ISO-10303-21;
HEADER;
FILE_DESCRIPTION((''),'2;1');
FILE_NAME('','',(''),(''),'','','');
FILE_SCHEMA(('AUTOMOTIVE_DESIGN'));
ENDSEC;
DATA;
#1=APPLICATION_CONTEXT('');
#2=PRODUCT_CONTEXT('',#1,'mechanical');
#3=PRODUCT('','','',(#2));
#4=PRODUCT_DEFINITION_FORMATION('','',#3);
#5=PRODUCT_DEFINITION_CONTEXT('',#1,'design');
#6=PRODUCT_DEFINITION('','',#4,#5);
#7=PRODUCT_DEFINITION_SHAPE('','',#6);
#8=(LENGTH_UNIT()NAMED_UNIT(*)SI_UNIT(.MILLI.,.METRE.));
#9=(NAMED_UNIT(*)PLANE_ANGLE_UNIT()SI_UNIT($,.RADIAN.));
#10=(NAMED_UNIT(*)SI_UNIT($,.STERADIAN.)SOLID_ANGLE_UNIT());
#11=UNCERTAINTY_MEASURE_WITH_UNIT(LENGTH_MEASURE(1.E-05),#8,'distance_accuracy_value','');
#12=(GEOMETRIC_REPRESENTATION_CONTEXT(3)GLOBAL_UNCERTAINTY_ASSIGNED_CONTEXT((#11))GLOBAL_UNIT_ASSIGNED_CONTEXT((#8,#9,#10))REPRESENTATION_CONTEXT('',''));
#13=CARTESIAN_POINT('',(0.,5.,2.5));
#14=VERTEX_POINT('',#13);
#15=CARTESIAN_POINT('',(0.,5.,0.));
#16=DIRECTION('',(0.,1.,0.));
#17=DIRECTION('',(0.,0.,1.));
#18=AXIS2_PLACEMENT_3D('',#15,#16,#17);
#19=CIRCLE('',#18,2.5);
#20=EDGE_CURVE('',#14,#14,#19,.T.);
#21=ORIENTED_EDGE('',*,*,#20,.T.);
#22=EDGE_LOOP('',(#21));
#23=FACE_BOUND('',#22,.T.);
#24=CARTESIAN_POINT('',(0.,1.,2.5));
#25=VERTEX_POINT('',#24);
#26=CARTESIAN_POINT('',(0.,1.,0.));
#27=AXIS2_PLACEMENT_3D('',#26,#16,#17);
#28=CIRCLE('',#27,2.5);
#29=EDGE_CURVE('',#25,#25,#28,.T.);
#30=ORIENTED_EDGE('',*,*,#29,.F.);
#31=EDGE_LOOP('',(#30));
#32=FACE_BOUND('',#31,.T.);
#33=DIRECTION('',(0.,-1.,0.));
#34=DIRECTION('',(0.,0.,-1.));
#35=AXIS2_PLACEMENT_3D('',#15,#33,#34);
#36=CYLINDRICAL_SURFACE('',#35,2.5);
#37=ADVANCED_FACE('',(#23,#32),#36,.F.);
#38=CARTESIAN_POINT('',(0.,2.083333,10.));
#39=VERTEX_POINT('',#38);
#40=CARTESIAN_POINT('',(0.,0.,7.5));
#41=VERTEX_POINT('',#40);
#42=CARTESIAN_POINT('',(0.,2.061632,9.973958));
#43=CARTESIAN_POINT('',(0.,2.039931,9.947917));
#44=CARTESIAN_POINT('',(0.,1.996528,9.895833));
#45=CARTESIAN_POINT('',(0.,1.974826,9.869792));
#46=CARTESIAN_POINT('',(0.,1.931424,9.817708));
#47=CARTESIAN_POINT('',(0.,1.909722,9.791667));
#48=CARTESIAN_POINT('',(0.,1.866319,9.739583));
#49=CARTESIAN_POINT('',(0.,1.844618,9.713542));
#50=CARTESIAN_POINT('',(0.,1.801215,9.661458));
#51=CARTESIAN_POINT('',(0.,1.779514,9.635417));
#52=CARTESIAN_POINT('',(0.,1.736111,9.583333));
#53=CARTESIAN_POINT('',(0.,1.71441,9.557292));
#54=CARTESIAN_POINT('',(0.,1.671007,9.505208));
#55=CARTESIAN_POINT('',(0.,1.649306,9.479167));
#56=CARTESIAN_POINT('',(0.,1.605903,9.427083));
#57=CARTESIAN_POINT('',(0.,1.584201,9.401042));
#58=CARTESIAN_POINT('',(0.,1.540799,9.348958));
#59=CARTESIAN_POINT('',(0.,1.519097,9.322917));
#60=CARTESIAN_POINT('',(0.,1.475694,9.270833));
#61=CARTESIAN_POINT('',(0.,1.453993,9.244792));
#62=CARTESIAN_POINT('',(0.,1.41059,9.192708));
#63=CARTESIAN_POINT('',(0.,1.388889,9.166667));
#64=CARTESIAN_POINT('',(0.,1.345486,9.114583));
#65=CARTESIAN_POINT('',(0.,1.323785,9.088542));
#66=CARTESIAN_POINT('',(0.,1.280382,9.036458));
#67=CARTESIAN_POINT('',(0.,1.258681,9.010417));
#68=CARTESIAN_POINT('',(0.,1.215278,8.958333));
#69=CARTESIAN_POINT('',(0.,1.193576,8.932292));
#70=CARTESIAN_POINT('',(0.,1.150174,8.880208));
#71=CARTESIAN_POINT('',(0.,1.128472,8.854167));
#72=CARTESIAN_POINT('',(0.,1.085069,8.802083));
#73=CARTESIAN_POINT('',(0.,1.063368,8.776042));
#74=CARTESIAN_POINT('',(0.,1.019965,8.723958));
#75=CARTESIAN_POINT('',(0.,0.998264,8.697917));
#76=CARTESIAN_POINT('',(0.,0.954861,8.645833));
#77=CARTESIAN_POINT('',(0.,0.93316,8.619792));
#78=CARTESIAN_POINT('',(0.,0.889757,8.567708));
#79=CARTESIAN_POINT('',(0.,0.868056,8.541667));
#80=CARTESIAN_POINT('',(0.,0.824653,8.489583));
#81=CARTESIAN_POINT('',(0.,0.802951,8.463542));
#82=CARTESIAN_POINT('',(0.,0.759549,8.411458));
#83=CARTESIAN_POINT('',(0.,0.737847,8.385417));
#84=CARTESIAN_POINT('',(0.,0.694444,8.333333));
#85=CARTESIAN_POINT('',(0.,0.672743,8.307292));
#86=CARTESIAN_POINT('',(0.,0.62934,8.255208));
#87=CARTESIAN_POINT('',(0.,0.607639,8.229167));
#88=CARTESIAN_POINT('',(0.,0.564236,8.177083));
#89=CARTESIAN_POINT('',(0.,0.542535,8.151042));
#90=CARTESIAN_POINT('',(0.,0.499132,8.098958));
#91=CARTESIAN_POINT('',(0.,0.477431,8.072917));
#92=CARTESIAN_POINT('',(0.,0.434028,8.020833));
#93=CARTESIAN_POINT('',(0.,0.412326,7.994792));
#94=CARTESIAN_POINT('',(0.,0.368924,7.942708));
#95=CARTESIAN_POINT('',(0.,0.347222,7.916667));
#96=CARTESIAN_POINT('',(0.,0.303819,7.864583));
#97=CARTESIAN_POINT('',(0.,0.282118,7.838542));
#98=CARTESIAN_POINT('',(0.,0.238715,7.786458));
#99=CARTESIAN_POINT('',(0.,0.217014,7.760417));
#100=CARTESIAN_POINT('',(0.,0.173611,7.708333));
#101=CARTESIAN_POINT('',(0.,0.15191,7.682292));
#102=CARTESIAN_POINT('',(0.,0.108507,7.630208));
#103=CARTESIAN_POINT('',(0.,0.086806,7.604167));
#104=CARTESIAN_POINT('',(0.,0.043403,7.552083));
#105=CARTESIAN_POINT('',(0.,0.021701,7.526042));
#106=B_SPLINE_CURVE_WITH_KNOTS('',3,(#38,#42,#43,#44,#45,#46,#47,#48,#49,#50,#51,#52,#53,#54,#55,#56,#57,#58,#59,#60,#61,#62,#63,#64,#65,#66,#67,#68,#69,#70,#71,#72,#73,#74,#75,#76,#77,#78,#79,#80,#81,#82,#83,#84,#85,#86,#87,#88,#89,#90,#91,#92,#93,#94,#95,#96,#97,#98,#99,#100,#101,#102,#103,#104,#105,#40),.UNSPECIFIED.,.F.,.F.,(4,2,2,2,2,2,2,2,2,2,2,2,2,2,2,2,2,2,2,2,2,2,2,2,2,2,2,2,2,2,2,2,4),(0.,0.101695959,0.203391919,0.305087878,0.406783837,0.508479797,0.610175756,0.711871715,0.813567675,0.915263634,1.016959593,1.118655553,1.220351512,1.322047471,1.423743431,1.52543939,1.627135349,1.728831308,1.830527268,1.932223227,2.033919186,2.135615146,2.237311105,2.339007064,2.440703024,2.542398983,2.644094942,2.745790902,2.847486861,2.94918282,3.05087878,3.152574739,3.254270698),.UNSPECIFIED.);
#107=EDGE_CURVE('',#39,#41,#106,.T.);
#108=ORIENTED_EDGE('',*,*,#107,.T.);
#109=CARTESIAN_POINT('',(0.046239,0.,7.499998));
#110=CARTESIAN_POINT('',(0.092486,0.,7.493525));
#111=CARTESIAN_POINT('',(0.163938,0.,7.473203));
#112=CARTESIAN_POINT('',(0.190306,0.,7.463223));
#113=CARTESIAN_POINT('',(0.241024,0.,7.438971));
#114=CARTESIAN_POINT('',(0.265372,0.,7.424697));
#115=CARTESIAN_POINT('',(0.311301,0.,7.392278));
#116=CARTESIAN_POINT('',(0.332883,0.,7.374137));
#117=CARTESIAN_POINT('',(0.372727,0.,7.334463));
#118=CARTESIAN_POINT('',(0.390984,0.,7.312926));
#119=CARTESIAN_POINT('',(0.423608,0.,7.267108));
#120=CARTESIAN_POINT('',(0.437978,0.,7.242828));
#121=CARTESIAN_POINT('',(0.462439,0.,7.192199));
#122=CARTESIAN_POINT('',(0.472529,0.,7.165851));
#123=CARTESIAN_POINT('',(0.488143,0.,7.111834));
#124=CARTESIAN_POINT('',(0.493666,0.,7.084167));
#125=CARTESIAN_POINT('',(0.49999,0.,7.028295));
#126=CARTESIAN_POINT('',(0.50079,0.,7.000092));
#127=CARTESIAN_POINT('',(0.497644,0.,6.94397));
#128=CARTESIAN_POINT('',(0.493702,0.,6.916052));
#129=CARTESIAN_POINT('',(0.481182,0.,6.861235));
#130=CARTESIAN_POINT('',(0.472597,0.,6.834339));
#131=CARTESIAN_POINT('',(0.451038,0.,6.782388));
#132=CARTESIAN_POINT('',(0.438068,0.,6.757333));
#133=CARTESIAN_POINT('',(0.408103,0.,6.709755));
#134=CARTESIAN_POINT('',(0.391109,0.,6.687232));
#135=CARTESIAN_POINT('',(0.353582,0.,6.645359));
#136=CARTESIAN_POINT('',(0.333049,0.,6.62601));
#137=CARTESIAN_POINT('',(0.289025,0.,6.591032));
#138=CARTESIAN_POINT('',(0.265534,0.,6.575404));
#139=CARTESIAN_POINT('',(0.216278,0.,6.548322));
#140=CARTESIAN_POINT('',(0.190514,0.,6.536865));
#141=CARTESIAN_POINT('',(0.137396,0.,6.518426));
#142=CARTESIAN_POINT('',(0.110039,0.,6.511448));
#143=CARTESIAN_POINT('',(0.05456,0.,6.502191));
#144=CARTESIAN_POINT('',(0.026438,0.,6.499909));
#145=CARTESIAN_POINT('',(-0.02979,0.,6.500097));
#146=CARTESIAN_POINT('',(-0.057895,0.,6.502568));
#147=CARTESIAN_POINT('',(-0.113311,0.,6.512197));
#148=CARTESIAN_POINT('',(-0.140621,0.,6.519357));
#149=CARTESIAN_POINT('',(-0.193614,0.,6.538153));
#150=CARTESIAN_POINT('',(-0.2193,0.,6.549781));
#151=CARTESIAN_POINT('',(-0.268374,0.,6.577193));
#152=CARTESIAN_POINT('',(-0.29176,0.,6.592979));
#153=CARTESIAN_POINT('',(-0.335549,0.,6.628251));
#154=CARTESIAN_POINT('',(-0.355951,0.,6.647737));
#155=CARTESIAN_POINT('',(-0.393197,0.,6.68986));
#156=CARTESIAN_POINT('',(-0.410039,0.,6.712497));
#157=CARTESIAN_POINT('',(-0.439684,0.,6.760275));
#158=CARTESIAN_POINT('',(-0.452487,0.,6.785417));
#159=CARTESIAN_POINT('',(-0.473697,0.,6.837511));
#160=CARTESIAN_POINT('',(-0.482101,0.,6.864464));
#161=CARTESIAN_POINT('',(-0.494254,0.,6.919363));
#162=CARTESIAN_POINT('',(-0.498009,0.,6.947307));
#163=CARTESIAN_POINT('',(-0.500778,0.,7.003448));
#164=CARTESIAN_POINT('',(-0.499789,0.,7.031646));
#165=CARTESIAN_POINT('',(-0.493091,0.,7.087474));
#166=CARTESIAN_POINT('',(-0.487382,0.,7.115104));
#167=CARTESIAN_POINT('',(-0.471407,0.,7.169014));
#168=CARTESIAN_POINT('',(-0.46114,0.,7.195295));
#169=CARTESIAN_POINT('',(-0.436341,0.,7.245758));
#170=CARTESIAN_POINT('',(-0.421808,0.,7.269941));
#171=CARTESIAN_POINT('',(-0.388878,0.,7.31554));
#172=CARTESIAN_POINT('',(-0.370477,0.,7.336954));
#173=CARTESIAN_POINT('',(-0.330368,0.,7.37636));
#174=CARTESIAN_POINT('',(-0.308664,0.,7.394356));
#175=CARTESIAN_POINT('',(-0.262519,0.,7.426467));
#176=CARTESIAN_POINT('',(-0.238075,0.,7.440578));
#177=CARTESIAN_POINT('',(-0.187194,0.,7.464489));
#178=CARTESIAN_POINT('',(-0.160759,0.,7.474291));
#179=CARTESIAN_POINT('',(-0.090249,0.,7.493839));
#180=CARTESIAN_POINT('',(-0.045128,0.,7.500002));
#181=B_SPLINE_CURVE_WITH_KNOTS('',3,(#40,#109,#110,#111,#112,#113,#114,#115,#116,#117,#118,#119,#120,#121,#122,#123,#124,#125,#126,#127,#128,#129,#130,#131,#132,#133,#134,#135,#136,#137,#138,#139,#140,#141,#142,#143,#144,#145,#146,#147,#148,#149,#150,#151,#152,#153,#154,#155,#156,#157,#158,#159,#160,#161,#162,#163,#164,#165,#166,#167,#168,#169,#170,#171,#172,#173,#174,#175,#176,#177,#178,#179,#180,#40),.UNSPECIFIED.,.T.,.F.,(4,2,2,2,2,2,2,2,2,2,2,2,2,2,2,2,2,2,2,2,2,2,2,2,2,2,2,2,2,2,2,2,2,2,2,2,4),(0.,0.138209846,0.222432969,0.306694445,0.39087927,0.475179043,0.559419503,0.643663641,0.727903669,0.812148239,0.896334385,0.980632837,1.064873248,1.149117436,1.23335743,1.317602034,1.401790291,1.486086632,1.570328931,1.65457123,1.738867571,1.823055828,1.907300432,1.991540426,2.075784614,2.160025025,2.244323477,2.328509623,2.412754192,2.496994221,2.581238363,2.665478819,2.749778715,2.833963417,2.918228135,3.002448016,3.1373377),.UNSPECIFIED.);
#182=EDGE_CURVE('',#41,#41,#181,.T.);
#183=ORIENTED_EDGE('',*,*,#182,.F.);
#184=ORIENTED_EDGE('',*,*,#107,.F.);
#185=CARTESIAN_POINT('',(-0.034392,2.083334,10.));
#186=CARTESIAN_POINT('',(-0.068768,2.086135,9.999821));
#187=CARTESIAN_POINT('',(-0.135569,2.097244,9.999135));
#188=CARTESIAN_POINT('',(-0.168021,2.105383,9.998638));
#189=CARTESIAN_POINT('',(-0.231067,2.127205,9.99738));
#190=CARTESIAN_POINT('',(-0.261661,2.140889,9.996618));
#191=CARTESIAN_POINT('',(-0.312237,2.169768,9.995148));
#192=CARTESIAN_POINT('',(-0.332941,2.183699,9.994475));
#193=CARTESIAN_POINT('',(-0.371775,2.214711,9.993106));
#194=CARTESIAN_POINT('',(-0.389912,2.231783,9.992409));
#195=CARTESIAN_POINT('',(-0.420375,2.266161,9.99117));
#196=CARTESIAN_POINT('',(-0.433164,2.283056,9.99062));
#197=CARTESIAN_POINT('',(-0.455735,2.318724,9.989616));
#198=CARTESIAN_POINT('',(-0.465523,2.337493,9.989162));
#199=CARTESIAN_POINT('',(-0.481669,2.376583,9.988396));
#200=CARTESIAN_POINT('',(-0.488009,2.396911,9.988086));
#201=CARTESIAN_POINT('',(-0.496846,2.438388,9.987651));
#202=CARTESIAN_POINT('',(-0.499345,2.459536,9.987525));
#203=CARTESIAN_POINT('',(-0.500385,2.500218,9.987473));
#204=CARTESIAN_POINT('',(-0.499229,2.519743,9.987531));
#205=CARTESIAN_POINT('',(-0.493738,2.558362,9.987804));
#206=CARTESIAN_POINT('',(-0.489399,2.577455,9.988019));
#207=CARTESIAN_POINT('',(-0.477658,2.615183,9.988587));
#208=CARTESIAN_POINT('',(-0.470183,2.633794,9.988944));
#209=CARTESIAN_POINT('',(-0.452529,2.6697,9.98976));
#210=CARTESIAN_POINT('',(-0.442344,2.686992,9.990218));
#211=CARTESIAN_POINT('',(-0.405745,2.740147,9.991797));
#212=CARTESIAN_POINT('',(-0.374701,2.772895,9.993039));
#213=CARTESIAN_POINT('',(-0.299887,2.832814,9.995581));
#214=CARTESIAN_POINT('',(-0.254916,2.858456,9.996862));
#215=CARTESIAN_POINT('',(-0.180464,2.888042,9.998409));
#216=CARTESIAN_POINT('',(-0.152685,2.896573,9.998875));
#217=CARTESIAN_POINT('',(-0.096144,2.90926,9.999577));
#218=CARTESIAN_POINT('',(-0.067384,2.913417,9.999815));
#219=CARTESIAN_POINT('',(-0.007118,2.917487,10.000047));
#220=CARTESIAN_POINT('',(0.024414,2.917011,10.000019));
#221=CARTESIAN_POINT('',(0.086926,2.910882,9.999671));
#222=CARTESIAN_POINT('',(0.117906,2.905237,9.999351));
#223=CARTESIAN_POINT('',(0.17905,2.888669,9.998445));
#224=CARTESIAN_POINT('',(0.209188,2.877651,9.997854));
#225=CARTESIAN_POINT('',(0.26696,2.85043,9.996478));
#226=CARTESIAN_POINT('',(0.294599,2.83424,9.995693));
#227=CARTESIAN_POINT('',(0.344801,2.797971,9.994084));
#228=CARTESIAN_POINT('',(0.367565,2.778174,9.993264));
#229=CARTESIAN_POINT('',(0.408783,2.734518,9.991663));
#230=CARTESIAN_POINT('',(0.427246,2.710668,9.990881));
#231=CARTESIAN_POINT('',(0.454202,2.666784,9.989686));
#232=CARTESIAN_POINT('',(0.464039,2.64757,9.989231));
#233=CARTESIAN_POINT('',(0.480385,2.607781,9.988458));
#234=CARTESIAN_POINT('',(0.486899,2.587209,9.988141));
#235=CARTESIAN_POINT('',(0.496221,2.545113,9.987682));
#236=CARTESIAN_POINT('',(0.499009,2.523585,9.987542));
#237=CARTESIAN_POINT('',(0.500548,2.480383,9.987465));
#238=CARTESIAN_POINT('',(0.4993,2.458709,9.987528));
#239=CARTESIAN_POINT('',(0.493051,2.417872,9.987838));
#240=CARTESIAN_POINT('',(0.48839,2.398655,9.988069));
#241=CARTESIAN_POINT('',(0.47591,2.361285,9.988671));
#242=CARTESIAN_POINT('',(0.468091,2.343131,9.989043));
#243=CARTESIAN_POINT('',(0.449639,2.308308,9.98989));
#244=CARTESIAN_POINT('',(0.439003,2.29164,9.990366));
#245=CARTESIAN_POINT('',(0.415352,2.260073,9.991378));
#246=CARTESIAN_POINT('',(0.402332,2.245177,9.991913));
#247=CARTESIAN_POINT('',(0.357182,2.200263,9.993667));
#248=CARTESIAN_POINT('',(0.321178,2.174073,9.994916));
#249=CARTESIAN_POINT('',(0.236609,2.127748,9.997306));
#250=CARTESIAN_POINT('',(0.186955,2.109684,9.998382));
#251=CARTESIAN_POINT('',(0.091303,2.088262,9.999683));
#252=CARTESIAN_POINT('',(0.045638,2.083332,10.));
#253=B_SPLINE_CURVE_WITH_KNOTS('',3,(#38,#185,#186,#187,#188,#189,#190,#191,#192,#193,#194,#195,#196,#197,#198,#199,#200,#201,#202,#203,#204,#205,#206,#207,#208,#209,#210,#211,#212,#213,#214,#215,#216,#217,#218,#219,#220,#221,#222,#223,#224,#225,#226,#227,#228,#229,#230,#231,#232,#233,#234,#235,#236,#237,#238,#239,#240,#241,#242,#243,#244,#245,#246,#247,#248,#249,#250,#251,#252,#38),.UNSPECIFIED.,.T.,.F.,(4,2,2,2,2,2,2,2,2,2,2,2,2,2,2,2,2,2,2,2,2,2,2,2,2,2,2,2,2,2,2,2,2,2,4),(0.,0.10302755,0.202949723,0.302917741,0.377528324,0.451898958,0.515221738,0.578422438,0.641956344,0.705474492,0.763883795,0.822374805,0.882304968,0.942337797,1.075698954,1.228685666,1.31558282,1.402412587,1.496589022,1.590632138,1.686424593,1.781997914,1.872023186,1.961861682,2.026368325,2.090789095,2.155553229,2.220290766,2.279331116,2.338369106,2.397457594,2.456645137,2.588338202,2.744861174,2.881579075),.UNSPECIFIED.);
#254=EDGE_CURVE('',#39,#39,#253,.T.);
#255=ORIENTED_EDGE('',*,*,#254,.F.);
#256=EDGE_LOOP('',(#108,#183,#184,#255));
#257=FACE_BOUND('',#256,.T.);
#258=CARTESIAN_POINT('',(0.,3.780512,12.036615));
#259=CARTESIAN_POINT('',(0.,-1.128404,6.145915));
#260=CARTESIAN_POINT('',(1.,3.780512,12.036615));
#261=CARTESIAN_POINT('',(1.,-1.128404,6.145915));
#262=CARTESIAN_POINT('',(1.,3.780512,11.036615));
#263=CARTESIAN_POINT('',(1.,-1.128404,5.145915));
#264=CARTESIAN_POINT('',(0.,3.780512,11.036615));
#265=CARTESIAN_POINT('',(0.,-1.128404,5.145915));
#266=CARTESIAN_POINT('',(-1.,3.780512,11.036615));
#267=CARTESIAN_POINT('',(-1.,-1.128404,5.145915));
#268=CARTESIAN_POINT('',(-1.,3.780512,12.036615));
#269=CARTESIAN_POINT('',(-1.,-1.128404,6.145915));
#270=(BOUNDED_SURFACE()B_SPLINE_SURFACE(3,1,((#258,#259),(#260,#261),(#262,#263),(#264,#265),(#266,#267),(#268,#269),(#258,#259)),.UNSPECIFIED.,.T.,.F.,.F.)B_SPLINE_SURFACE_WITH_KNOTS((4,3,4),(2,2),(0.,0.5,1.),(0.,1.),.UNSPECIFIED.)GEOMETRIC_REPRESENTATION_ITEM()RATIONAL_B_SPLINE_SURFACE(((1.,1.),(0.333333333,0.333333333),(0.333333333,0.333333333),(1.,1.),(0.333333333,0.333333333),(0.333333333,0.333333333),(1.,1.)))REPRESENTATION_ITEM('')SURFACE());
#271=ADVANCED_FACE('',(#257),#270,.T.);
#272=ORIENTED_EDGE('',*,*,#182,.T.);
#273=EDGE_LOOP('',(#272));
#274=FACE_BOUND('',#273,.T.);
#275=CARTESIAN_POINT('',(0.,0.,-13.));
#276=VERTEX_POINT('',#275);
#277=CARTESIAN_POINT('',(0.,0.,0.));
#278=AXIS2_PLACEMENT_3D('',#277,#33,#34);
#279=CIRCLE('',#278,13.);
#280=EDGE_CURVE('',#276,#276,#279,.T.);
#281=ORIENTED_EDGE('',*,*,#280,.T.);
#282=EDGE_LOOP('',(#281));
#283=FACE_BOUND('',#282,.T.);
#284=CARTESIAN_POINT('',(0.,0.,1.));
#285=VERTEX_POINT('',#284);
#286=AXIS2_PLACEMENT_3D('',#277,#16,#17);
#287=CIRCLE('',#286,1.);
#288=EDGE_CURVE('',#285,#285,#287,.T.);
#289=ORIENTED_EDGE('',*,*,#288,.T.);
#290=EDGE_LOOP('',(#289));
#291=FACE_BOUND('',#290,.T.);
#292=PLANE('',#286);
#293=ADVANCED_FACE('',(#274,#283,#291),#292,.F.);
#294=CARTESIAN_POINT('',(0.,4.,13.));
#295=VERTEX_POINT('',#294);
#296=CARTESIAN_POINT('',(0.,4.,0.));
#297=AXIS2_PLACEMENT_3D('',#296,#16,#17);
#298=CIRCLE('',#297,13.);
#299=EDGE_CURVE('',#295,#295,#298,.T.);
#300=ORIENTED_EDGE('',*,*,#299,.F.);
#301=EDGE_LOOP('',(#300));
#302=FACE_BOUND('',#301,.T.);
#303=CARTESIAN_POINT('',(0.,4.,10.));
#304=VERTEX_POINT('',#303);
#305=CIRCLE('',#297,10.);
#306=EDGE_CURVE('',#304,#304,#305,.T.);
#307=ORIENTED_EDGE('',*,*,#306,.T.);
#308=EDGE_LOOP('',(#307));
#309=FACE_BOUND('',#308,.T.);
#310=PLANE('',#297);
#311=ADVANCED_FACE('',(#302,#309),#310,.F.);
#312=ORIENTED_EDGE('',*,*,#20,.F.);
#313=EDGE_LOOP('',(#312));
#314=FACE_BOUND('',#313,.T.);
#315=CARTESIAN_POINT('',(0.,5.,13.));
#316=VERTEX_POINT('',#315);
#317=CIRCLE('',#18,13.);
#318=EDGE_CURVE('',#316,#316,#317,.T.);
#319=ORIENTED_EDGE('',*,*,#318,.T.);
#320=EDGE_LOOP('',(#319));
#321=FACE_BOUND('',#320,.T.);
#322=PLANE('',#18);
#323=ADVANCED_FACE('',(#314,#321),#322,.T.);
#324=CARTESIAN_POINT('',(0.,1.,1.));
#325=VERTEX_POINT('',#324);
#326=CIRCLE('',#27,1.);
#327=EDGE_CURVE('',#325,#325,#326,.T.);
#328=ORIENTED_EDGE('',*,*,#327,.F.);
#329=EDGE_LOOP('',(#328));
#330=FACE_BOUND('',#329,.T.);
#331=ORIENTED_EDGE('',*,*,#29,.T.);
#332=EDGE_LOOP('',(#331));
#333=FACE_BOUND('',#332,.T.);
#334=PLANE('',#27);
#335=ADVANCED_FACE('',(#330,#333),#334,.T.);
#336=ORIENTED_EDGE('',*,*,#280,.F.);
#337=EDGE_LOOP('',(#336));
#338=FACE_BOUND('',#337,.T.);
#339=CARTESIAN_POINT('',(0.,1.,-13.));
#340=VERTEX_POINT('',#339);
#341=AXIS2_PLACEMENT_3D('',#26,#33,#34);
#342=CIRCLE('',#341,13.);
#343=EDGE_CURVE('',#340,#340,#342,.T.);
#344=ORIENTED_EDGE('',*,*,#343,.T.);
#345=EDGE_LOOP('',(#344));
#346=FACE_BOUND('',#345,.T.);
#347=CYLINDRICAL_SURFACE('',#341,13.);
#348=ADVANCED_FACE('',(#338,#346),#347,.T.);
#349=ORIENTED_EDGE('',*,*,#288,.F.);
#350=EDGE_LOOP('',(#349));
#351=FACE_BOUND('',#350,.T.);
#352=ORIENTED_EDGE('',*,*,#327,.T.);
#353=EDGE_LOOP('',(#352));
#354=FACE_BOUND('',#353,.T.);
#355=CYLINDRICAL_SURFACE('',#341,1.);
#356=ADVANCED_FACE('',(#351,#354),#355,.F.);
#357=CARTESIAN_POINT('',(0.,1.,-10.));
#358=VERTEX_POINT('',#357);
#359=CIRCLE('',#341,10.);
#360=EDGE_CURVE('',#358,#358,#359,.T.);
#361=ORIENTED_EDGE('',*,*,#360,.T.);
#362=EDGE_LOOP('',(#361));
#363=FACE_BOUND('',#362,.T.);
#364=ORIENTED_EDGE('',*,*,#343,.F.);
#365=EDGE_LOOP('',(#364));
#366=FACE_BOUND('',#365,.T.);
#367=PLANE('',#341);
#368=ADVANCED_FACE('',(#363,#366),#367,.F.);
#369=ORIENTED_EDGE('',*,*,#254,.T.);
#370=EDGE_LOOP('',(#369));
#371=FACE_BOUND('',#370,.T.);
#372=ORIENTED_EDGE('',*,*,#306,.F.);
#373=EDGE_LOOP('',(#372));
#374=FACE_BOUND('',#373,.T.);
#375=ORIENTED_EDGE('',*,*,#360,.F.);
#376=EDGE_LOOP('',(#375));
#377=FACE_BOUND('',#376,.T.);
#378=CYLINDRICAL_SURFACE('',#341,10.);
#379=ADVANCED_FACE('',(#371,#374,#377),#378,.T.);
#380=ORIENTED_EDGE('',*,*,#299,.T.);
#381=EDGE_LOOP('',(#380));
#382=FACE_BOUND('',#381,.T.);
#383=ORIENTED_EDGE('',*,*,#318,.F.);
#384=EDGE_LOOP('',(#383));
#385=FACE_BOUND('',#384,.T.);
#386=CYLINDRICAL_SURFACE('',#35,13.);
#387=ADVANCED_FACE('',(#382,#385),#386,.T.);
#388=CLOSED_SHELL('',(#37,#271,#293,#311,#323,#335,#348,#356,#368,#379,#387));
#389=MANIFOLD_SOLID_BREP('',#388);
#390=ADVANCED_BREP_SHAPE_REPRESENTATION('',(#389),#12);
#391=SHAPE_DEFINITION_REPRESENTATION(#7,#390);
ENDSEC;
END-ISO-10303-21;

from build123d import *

# Parameters (mm, degrees)
SKETCH1_R           = 10
BOSS_EXTRUDE1_DEPTH = 1
SKETCH2_R           = 10
BOSS_EXTRUDE2_DEPTH = 4
SKETCH4_R           = 13
BOSS_EXTRUDE3_DEPTH = 1
CUT_SWEEP1_START    = 4.993438222
CUT_SWEEP1_DEPTH    = 4.55597903
SKETCH9_R           = 2.5
CUT_EXTRUDE2_DEPTH  = 5
SKETCH10_R          = 2.5
SKETCH10_R_2        = 1
BOSS_EXTRUDE4_DEPTH = 1
SKETCH11_R          = 13
SKETCH11_R_2        = 10
BOSS_EXTRUDE5_DEPTH = 1


# Read off the part's stored shape, not the designer's step: Cut-Sweep1
with BuildPart() as part:
    # Sketch1 → Boss-Extrude1 (new body)
    with BuildSketch(Plane(origin=(0, 0, 0), x_dir=(1, 0, 0), z_dir=(0, 1, 0))):
        with Locations(Location((0, 0, 0), (0, 0, 270))):
            Circle(SKETCH1_R)
    extrude(amount=BOSS_EXTRUDE1_DEPTH)

    # Sketch2 → Boss-Extrude2 (add)
    with BuildSketch(Plane(origin=(0, 0, 0), x_dir=(1, 0, 0), z_dir=(0, 1, 0))):
        with Locations(Location((0, 0, 0), (0, 0, 270))):
            Circle(SKETCH2_R)
    extrude(amount=BOSS_EXTRUDE2_DEPTH)

    # Sketch4 → Boss-Extrude3 (add)
    with BuildSketch(Plane(origin=(0, 4, 0), x_dir=(1, 0, 0), z_dir=(0, 1, 0))):
        with Locations(Location((0, 0, 0), (0, 0, 270))):
            Circle(SKETCH4_R)
    extrude(amount=BOSS_EXTRUDE3_DEPTH)

    # Cut-Sweep1 outline → Cut-Sweep1 (cut)
    with BuildSketch(Plane(origin=(0, 0, 0), x_dir=(1, 0, 0), z_dir=(0, 0.6401843996644766, 0.7682212795973786)).offset(CUT_SWEEP1_START)):
        with BuildLine():
            add(Edge.make_bspline(
                [(0, -4.801382997), (1, -4.801382997), (1, -4.161198598), (0, -4.161198598), (-1, -4.161198598), (-1, -4.801382997), (0, -4.801382997)],
                knots=[0, 0, 0, 0, 0.5, 0.5, 0.5, 1, 1, 1, 1], degree=3, weights=[1, 0.333333333, 0.333333333, 1, 0.333333333, 0.333333333, 1]))
        make_face()
    extrude(amount=CUT_SWEEP1_DEPTH, mode=Mode.SUBTRACT)

    # Sketch9 → Cut-Extrude2 (cut)
    with BuildSketch(Plane(origin=(0, 0, 0), x_dir=(1, 0, 0), z_dir=(0, 1, 0))):
        with Locations(Location((0, 0, 0), (0, 0, 270))):
            Circle(SKETCH9_R)
    extrude(amount=CUT_EXTRUDE2_DEPTH, mode=Mode.SUBTRACT)

    # Sketch10 → Boss-Extrude4 (add)
    with BuildSketch(Plane(origin=(0, 0, 0), x_dir=(1, 0, 0), z_dir=(0, 1, 0))):
        with Locations(Location((0, 0, 0), (0, 0, 270))):
            Circle(SKETCH10_R)
        with Locations(Location((0, 0, 0), (0, 0, 270))):
            Circle(SKETCH10_R_2, mode=Mode.SUBTRACT)
    extrude(amount=BOSS_EXTRUDE4_DEPTH)

    # Sketch11 → Boss-Extrude5 (add)
    with BuildSketch(Plane(origin=(0, 0, 0), x_dir=(-1, 0, 0), z_dir=(0, -1, 0))):
        with Locations(Location((0, 0, 0), (0, 0, 270))):
            Circle(SKETCH11_R)
        with Locations(Location((0, 0, 0), (0, 0, 90))):
            Circle(SKETCH11_R_2, mode=Mode.SUBTRACT)
    extrude(amount=-BOSS_EXTRUDE5_DEPTH)


solid = part.part
